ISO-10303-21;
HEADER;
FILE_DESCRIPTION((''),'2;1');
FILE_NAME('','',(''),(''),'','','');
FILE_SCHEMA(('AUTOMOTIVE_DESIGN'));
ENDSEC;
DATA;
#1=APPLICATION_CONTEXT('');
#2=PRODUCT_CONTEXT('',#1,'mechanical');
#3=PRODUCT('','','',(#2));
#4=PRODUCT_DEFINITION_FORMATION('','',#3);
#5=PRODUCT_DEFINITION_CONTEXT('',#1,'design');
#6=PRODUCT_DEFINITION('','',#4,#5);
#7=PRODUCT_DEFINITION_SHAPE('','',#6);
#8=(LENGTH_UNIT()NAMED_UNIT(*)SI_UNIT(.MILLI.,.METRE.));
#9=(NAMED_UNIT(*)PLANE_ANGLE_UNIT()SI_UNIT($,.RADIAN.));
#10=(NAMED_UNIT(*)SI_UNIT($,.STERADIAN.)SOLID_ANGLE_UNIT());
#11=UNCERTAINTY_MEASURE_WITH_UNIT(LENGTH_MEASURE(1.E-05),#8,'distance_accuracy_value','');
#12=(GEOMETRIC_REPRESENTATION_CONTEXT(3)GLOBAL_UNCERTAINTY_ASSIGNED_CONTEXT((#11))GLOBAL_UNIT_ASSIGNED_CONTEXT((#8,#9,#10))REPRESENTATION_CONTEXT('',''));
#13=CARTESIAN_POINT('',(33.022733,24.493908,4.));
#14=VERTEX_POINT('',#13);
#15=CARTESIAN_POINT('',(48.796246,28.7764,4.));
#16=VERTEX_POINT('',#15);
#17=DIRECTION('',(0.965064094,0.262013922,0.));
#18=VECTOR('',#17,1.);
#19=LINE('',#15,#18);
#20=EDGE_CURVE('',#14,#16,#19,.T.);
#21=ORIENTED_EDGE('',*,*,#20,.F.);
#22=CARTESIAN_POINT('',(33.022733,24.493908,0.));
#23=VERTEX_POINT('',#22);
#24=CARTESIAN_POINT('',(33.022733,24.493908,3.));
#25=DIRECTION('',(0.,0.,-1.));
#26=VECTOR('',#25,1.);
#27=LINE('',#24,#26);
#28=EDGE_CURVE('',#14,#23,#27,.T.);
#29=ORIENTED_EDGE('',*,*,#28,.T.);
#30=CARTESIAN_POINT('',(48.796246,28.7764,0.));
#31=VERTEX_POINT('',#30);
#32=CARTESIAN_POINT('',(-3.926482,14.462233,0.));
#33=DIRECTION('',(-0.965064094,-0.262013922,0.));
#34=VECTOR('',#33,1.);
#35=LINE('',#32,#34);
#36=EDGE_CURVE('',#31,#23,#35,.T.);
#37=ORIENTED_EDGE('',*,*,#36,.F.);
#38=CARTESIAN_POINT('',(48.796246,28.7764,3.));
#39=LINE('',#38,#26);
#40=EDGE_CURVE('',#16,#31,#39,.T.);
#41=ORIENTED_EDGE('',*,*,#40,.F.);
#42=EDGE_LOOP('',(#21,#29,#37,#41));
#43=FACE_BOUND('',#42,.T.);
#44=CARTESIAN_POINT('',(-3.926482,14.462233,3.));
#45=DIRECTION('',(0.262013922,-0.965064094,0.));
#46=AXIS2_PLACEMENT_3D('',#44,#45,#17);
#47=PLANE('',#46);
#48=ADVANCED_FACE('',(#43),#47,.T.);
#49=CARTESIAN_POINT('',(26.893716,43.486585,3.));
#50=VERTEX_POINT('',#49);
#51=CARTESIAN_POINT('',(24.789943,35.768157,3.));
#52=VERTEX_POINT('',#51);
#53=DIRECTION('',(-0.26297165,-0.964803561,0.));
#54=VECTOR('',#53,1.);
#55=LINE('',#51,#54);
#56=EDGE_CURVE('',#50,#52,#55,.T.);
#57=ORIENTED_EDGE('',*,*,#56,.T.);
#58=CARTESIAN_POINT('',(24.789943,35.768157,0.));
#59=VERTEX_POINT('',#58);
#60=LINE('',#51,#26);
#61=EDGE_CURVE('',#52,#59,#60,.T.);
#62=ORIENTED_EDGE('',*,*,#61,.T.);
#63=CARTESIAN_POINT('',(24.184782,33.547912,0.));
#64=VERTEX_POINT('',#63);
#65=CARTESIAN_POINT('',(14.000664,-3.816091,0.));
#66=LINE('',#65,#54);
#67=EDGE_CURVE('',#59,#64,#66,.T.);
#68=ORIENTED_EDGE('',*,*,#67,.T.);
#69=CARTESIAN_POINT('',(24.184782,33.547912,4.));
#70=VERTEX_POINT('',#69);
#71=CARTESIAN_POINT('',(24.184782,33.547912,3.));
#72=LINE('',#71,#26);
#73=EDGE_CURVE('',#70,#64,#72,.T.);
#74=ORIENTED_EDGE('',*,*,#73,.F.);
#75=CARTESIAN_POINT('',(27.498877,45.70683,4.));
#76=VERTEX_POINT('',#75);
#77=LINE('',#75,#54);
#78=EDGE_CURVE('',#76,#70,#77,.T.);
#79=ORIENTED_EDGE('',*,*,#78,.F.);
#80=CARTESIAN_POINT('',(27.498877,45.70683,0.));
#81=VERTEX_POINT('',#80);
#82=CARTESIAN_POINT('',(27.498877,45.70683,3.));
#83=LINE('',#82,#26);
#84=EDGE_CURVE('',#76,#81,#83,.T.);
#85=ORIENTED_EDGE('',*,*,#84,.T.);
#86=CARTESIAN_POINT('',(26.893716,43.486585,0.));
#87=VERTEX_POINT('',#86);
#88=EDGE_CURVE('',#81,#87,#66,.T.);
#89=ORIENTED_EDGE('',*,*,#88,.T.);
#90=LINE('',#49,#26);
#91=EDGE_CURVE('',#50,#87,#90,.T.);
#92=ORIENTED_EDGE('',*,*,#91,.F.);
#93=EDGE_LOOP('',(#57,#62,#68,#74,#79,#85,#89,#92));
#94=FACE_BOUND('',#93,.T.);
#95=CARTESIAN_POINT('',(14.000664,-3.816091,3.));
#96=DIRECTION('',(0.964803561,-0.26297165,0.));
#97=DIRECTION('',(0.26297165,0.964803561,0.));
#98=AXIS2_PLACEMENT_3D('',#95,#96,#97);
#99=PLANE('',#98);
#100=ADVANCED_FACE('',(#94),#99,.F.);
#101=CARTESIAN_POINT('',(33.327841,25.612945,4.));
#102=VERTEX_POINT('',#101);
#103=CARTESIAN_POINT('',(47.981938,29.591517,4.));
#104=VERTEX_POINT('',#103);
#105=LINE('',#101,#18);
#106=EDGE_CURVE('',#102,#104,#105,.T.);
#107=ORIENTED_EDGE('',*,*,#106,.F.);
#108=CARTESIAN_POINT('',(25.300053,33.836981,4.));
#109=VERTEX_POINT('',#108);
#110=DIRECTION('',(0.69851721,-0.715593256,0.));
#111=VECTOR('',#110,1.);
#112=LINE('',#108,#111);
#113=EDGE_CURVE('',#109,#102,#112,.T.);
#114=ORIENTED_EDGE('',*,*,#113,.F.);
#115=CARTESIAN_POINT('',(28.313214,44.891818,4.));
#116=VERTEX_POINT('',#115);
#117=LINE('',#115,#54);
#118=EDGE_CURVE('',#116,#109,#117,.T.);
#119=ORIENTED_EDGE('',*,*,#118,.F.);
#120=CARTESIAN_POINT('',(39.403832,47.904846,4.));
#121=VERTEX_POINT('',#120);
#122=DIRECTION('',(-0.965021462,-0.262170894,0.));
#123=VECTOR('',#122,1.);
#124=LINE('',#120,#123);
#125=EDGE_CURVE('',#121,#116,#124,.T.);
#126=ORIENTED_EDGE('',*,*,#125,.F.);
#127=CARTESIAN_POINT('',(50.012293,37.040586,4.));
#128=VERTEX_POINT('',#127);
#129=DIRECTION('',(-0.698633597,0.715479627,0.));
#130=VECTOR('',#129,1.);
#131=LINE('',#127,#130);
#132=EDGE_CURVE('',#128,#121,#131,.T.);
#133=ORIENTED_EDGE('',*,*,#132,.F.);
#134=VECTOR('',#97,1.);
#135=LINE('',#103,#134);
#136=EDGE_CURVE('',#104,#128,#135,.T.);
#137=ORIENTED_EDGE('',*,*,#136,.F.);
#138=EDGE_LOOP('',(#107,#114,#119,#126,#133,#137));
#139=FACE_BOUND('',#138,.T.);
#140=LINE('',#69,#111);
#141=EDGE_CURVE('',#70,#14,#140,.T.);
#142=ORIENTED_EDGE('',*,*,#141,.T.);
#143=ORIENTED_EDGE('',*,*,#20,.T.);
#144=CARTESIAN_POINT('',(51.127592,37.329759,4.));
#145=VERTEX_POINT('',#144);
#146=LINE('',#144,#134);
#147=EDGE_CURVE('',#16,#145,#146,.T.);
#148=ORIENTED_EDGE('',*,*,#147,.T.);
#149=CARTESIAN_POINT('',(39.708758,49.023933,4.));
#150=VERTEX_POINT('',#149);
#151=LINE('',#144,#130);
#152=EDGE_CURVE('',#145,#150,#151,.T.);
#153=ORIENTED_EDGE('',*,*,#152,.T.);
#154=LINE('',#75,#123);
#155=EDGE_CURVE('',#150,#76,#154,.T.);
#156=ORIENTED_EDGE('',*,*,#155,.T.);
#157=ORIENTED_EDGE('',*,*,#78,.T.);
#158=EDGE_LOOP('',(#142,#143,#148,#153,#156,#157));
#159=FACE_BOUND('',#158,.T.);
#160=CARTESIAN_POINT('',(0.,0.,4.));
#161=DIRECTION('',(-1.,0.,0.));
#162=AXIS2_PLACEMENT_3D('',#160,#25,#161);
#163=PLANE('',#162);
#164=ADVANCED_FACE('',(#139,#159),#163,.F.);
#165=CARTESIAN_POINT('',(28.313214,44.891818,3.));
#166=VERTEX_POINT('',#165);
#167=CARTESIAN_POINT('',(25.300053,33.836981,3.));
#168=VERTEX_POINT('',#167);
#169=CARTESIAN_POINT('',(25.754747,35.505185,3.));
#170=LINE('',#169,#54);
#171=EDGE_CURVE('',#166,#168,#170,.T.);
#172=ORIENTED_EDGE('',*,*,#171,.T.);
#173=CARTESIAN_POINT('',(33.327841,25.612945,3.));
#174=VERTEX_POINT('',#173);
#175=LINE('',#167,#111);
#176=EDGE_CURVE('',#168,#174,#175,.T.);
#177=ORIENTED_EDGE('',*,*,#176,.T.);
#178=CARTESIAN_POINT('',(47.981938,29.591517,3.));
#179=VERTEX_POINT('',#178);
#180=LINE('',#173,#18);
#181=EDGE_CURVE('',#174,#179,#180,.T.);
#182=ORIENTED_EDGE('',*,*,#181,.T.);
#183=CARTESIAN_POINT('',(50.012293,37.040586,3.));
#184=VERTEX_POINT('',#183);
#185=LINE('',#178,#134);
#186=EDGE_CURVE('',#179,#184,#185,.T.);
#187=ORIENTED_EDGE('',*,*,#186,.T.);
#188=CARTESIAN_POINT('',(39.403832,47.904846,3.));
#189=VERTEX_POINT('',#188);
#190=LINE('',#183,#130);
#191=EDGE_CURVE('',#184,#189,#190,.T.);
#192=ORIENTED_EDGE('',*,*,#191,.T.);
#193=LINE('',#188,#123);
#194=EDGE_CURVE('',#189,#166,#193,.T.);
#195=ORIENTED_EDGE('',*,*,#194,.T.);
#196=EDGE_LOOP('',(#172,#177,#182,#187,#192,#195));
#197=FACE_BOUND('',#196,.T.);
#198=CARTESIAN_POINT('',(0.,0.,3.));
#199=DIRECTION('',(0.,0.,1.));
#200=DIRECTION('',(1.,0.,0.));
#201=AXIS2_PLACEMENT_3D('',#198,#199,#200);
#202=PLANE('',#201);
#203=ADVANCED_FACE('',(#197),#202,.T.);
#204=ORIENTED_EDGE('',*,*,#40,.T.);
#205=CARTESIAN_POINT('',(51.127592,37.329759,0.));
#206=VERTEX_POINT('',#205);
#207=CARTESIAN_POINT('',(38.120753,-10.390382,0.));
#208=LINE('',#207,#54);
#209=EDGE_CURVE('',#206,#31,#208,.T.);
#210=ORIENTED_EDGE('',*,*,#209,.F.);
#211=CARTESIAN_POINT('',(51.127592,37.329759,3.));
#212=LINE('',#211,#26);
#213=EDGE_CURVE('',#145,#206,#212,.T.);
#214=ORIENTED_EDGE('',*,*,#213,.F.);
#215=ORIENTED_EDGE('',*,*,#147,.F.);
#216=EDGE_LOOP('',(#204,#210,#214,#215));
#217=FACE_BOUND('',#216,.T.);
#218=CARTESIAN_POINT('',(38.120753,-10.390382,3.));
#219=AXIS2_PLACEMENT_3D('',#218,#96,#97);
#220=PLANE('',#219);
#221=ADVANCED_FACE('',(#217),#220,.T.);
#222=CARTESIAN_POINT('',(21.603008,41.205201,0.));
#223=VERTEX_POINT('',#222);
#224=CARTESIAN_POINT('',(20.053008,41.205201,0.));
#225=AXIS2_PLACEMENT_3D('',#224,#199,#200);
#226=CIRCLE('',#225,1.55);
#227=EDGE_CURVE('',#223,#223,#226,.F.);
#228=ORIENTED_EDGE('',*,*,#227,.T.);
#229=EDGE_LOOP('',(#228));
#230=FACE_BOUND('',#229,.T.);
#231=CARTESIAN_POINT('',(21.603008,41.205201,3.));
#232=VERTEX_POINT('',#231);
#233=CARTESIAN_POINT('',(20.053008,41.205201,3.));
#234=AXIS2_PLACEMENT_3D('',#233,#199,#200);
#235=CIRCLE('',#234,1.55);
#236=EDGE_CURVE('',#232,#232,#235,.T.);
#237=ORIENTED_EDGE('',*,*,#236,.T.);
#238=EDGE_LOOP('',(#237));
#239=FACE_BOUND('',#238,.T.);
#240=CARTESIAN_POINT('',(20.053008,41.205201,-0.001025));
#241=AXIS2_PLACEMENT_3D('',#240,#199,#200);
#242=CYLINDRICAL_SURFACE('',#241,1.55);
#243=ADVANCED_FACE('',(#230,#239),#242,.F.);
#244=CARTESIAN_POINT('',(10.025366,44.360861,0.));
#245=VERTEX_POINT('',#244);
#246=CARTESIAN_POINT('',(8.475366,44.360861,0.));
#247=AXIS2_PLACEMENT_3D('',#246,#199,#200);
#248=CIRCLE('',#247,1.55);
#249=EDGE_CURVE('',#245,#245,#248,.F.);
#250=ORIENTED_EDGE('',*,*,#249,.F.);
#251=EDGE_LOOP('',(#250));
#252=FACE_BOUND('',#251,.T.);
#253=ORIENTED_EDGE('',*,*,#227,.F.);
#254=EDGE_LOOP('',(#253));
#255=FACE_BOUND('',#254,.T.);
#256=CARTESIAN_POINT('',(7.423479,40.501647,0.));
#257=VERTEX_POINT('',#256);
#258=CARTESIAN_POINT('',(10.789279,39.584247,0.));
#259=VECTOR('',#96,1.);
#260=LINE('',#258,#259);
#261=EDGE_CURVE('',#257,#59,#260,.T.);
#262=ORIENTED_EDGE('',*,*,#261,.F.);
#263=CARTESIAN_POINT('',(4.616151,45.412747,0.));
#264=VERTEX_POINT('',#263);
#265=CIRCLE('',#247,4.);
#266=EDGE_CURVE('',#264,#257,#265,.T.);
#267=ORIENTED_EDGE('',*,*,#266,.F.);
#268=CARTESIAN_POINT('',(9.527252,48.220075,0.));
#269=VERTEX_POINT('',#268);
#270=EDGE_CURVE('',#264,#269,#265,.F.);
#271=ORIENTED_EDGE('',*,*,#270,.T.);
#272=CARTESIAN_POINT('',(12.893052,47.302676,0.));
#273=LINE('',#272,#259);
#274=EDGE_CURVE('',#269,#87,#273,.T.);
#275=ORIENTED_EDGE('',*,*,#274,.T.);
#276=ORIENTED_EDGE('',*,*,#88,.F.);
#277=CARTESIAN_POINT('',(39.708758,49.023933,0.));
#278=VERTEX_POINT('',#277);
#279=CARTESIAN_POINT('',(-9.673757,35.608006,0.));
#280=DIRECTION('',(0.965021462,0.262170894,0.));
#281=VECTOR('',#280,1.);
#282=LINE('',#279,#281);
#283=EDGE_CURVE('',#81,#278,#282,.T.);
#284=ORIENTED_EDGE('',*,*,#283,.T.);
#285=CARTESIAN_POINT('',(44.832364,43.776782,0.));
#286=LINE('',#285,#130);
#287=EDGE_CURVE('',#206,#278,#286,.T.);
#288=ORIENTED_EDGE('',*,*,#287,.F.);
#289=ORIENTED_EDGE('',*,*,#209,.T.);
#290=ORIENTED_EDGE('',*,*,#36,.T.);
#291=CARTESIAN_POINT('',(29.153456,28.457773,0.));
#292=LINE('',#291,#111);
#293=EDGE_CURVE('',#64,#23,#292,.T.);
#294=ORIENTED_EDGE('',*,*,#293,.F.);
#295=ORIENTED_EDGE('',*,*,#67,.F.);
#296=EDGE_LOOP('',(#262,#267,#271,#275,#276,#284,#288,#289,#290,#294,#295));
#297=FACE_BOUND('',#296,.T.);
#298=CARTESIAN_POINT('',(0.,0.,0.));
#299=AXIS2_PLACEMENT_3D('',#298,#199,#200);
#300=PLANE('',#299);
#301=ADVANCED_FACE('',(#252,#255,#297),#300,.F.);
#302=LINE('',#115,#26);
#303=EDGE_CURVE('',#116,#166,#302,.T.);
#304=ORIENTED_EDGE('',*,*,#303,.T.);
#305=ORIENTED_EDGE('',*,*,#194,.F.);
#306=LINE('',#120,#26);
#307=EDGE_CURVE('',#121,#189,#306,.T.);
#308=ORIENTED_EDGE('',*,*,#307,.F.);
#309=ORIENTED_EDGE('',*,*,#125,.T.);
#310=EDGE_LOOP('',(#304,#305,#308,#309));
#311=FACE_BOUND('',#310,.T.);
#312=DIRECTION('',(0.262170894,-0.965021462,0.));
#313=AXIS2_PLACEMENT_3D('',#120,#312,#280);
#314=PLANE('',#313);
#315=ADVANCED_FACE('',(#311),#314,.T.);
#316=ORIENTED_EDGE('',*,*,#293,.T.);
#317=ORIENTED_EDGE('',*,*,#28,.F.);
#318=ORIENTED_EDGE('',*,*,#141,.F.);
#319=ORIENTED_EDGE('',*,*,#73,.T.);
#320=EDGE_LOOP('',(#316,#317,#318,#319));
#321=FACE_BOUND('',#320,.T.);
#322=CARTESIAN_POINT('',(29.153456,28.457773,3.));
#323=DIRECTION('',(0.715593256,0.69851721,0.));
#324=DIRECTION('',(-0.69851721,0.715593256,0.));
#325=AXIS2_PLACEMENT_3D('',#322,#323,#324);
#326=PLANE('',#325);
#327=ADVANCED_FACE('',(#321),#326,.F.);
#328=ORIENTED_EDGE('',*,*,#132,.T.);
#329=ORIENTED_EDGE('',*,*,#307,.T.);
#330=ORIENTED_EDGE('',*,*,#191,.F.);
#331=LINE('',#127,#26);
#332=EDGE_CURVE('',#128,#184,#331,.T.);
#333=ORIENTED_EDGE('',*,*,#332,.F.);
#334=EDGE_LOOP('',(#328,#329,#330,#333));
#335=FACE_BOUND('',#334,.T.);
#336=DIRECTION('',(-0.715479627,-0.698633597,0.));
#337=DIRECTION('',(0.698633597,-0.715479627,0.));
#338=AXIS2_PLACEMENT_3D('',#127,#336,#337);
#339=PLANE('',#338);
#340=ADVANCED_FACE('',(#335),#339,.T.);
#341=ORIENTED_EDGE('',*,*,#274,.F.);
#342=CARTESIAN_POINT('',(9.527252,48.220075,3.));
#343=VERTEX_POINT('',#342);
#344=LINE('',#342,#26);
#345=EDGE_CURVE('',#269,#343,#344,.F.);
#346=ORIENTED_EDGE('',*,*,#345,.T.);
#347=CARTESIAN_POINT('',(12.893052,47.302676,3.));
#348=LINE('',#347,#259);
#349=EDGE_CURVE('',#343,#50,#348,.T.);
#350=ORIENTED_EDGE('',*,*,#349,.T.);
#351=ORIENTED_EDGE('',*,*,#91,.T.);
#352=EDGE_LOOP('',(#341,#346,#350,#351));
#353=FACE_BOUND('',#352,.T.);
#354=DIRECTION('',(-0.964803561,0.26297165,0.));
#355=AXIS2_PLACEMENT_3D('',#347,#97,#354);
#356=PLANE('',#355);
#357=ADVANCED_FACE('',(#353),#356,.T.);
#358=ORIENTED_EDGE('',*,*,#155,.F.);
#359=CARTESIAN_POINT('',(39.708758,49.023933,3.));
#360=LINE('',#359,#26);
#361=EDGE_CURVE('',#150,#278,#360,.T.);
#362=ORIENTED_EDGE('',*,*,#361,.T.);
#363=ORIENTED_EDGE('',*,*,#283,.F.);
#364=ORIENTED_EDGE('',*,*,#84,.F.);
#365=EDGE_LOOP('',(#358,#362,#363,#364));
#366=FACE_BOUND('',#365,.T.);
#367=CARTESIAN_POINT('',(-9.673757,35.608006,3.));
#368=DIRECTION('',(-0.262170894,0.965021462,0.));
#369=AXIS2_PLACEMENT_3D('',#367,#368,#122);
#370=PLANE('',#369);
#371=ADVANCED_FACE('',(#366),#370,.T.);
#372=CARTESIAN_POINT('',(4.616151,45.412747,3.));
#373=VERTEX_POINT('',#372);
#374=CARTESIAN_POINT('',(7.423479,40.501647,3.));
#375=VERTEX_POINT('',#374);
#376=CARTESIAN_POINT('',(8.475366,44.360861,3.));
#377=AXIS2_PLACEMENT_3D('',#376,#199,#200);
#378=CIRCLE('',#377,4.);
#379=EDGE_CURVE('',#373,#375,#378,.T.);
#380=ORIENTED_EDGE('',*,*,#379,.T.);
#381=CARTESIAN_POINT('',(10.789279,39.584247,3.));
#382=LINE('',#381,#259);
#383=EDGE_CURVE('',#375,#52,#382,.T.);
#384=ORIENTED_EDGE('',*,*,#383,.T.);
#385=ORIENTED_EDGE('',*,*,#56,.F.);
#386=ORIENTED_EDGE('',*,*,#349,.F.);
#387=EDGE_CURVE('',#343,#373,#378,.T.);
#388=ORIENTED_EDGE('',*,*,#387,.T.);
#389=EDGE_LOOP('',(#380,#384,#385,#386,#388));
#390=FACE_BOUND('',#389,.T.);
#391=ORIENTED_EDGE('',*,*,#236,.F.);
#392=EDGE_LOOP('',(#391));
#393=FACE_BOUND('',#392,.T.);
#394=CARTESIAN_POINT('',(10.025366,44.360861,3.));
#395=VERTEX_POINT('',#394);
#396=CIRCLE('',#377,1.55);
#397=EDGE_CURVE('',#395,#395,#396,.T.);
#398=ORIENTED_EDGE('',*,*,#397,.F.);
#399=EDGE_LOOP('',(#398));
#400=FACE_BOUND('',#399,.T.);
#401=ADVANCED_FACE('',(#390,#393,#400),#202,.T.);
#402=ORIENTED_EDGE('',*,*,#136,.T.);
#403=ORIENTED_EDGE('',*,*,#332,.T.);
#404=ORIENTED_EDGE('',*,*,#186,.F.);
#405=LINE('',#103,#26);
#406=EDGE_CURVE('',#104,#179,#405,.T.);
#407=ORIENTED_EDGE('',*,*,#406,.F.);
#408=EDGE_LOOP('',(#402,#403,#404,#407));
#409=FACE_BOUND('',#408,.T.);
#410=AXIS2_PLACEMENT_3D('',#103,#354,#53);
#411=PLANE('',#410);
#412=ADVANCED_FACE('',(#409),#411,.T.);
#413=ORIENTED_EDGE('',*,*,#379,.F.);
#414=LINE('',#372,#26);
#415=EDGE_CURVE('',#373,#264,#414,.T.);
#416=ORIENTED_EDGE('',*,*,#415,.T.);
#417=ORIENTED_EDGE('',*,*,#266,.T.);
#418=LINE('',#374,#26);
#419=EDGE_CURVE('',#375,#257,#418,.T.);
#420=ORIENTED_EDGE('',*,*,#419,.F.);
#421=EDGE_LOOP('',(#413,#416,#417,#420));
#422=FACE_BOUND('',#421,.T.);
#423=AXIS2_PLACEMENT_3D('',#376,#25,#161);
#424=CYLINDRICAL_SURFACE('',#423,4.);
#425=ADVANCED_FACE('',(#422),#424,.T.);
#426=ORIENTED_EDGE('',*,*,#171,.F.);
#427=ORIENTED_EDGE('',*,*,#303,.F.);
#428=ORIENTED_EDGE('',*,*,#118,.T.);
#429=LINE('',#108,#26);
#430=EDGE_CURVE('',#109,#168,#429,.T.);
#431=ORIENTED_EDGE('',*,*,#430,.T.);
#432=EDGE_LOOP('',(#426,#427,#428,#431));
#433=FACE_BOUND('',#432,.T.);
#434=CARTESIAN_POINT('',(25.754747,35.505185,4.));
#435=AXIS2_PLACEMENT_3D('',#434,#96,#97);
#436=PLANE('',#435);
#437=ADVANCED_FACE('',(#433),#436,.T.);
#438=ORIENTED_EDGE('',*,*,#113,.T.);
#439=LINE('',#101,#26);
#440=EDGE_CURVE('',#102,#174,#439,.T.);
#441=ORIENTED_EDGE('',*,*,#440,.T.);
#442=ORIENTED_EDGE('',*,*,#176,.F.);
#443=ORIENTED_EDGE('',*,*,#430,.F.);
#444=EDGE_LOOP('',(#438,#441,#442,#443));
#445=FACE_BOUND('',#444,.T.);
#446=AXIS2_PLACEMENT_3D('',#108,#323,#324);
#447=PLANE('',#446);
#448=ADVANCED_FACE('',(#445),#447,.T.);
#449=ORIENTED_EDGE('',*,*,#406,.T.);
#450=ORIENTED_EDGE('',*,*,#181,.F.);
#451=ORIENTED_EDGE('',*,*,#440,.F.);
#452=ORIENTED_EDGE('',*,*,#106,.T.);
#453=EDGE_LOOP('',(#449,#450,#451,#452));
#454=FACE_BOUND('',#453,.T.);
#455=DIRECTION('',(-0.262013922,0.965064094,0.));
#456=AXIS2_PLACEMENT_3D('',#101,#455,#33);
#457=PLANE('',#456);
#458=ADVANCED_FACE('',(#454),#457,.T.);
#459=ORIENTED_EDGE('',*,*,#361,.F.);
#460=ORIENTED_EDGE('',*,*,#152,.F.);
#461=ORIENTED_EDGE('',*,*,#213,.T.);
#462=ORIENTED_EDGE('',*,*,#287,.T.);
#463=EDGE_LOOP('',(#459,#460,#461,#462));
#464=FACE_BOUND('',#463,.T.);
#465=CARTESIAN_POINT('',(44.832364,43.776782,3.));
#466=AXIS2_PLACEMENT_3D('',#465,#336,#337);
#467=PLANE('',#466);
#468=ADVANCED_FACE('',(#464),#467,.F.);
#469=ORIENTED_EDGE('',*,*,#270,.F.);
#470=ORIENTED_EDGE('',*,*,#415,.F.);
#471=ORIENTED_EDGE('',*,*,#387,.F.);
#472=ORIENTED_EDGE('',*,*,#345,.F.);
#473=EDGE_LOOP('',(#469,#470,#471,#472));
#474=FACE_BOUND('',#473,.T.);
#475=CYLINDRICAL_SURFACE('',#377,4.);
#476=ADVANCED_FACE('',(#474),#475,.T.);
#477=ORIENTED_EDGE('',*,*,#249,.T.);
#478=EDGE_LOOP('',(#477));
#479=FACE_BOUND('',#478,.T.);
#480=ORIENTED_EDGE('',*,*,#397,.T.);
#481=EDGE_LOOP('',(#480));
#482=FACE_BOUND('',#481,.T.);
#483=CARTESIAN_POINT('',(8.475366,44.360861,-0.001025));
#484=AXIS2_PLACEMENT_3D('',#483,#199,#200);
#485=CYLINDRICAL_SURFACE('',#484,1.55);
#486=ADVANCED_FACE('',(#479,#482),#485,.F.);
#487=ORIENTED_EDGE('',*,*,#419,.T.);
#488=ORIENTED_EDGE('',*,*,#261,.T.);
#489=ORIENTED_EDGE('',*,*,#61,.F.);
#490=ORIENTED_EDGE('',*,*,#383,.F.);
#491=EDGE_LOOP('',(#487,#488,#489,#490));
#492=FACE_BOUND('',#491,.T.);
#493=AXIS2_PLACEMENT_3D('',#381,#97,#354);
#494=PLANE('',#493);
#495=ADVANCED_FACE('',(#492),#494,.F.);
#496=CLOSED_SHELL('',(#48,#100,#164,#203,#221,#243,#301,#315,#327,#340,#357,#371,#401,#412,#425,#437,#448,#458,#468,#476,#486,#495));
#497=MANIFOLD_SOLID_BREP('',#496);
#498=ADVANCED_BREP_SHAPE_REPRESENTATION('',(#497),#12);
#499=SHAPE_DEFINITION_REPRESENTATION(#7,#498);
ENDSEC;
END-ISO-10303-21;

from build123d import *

# Parameters (mm, degrees)
BOSS_EXTRUDE1_DEPTH = 3
FILLET1_R           = 4
BOSS_EXTRUDE2_DEPTH = 1
CUT_EXTRUDE1_REACH  = 72.897
SKETCH5_R           = 1.55


with BuildPart() as part:
    # Sketch1 → Boss-Extrude1 (new body)
    with BuildSketch(Plane.XY):
        Polygon((49.961918802, 33.053079846), (25.841829778, 39.627371101), (24.789943177, 35.768156857), (24.184782156, 33.547911794), (33.022732651, 24.493907566), (48.796245804, 28.776400372), align=None)
        Polygon((27.4988774, 45.706830407), (26.893716379, 43.486585345), (25.841829778, 39.627371101), (49.961918802, 33.053079846), (51.127591799, 37.329759319), (39.708758261, 49.023933188), align=None)
        with BuildLine():
            Line((24.964109257, 44.012528645), (5.668038039, 49.271961649))
            Line((5.668038039, 49.271961649), (4.616151438, 45.412747405))
            ThreePointArc((4.616151438, 45.412747405), (5.002692971, 42.375780391), (7.423479081, 40.501646561))
            Line((7.423479081, 40.501646561), (24.789943177, 35.768156857))
            Line((24.789943177, 35.768156857), (25.841829778, 39.627371101))
            Line((25.841829778, 39.627371101), (26.893716379, 43.486585345))
            Line((26.893716379, 43.486585345), (24.964109257, 44.012528645))
        make_face()
    extrude(amount=BOSS_EXTRUDE1_DEPTH)

    # Fillet1
    fillet1_edges = [part.edges().sort_by_distance(p)[0] for p in [
        (5.668038039, 49.271961649, 1.5),
    ]]
    fillet(fillet1_edges, radius=FILLET1_R - 0.0001)  # a hair under: the kernel refuses the full size

    # Sketch2 → Boss-Extrude2 (add)
    with BuildSketch(Plane.XY.offset(3)):
        Polygon((48.796245804, 28.776400372), (33.022732651, 24.493907566), (24.184782156, 33.547911794), (24.789943177, 35.768156857), (26.893716379, 43.486585345), (27.4988774, 45.706830407), (39.708758261, 49.023933188), (51.127591799, 37.329759319), align=None)
        Polygon((27.85851994, 43.223613694), (25.754746738, 35.505185207), (25.300052744, 33.836981106), (33.327840747, 25.612944712), (47.98193766, 29.591517145), (50.012292821, 37.040585847), (39.40383219, 47.904846429), (28.313213935, 44.891817795), align=None, mode=Mode.SUBTRACT)
    extrude(amount=BOSS_EXTRUDE2_DEPTH)

    # Sketch5 → Cut-Extrude1 (cut, up to next)
    with BuildSketch(Plane.XY.offset(3), mode=Mode.PRIVATE) as cut_extrude1_sk1:
        with Locations((8.475365681, 44.360860805)):
            Circle(SKETCH5_R)
    cut_extrude1_tool1 = extrude(cut_extrude1_sk1.sketch, amount=-CUT_EXTRUDE1_REACH, mode=Mode.PRIVATE) & part.part
    # Sketch5 → Cut-Extrude1 (cut, up to next)
    with BuildSketch(Plane.XY.offset(3), mode=Mode.PRIVATE) as cut_extrude1_sk2:
        with Locations((20.053008413, 41.205201002)):
            Circle(SKETCH5_R)
    cut_extrude1_tool2 = extrude(cut_extrude1_sk2.sketch, amount=-CUT_EXTRUDE1_REACH, mode=Mode.PRIVATE) & part.part
    add(cut_extrude1_tool1.solids().sort_by_distance((8.475366, 44.360861, 3))[0], mode=Mode.SUBTRACT)
    add(cut_extrude1_tool2.solids().sort_by_distance((20.053008, 41.205201, 3))[0], mode=Mode.SUBTRACT)


solid = part.part
